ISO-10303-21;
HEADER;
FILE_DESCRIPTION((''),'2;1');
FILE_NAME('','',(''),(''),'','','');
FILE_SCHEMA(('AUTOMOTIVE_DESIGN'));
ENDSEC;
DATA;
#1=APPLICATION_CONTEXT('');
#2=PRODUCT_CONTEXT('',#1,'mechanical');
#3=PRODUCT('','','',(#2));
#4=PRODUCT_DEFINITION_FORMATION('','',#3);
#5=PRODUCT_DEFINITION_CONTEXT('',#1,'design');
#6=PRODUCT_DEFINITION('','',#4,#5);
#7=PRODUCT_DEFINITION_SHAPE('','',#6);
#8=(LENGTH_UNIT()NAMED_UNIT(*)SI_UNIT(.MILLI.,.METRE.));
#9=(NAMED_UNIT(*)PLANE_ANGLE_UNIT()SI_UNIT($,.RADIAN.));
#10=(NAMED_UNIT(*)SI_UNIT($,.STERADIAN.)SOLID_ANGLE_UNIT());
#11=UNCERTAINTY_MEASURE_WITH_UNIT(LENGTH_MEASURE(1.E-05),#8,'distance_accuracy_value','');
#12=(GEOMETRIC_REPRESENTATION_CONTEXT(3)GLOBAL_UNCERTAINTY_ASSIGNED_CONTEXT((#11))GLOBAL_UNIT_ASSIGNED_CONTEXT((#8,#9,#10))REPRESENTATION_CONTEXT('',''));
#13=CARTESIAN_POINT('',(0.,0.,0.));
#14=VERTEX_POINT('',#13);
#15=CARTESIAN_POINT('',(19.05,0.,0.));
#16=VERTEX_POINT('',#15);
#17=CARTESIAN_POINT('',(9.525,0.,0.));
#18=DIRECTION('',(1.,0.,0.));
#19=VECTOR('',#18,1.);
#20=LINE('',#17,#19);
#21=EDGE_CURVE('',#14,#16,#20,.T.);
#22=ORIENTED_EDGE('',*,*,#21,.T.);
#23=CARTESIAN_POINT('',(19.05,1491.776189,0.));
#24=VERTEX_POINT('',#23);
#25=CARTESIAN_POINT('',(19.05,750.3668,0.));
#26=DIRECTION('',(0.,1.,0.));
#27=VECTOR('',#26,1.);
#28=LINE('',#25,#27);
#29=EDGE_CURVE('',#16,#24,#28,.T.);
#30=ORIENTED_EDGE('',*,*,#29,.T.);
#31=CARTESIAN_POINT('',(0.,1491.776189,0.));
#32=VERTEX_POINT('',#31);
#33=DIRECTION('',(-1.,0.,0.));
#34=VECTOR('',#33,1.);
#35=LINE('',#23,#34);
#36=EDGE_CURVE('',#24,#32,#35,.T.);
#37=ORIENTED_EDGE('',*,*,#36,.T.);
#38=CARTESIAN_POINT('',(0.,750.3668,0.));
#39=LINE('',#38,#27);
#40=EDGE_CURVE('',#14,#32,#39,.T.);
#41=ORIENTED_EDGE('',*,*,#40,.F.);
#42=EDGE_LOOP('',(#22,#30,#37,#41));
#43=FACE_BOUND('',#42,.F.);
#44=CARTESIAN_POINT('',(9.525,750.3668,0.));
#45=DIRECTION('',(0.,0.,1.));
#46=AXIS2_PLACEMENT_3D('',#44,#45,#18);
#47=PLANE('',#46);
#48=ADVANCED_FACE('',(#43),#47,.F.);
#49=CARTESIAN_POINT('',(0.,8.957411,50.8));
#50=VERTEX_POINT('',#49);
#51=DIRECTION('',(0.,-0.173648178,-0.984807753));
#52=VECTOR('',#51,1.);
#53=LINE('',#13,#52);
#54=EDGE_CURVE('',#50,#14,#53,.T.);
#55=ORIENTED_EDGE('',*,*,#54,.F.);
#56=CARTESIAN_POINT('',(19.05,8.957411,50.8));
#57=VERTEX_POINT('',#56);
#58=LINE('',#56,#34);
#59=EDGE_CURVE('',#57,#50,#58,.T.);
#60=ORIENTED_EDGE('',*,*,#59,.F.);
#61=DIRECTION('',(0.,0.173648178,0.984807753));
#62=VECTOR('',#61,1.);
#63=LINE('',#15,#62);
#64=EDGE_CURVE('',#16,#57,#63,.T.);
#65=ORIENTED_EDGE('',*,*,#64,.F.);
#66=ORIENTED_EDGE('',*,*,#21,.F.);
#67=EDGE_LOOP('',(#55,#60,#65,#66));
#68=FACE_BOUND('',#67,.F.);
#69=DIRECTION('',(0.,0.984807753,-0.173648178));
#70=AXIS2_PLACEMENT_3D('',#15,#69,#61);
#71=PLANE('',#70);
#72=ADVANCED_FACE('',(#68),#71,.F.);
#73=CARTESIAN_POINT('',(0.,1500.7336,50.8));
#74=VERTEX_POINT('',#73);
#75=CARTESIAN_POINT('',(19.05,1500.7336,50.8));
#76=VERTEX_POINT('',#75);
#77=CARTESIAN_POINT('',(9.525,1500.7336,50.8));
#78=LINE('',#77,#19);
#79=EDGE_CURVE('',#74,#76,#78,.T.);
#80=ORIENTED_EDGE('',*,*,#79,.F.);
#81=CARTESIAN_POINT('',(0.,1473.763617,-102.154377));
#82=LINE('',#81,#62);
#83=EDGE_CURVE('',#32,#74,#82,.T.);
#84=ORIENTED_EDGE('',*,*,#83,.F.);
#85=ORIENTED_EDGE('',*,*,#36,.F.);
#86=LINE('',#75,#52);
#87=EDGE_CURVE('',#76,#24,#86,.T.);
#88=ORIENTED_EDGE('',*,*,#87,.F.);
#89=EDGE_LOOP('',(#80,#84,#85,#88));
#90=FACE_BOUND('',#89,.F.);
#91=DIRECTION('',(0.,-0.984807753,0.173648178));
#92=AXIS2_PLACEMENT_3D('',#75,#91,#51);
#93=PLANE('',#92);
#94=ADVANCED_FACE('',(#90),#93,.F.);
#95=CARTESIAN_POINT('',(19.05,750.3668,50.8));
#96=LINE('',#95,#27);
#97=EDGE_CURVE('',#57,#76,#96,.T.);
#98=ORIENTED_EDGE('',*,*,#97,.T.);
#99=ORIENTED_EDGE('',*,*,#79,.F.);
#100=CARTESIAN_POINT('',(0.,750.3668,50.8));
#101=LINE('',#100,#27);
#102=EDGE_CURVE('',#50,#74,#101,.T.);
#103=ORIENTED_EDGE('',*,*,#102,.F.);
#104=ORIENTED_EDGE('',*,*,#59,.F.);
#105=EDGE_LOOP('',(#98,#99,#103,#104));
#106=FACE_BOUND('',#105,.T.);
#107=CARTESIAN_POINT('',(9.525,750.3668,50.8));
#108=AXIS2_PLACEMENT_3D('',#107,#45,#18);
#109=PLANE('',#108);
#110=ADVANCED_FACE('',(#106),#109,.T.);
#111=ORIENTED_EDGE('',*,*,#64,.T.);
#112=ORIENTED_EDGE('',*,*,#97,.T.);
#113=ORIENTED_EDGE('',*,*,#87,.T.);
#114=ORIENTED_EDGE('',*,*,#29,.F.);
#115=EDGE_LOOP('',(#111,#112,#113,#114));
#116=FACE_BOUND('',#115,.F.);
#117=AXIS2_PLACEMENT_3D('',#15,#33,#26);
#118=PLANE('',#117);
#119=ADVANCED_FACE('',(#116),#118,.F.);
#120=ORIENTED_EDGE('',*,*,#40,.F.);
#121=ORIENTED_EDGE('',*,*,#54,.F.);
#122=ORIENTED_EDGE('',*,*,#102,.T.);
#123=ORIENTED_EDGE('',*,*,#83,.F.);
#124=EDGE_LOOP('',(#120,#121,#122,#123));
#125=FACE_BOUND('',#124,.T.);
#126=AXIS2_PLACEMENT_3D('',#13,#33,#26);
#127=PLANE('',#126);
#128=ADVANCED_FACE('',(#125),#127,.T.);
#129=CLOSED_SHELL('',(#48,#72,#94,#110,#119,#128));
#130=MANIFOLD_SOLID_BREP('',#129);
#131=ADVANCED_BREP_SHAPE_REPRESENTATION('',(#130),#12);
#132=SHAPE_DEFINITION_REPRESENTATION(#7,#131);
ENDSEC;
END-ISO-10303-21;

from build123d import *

# Parameters (mm, degrees)
F0_W     = 19.05
F0_H     = 1500.7336
F1_DEPTH = 50.8
F3_DEPTH = 19.051


# Not quite as in the source:
# - a feature names something its author has since deleted; it is built from what else it names


with BuildPart() as f1:
    # F0 (on Top) → F1 (new body)
    with BuildSketch(Plane.XY):
        with Locations((9.525, 750.3668)):
            Rectangle(F0_W, F0_H)
    extrude(amount=F1_DEPTH)

    # F2 (on face) → F3 (cut, through all)
    with BuildSketch(Plane.YZ.offset(19.05)):
        Polygon((8.95741062, 50.8), (0, 50.8), (0, 0), align=None)
        Polygon((1500.7336, 50.8), (1491.77618938, 0), (1500.7336, 0), align=None)
    extrude(amount=-F3_DEPTH, mode=Mode.SUBTRACT)


solid = f1.part
